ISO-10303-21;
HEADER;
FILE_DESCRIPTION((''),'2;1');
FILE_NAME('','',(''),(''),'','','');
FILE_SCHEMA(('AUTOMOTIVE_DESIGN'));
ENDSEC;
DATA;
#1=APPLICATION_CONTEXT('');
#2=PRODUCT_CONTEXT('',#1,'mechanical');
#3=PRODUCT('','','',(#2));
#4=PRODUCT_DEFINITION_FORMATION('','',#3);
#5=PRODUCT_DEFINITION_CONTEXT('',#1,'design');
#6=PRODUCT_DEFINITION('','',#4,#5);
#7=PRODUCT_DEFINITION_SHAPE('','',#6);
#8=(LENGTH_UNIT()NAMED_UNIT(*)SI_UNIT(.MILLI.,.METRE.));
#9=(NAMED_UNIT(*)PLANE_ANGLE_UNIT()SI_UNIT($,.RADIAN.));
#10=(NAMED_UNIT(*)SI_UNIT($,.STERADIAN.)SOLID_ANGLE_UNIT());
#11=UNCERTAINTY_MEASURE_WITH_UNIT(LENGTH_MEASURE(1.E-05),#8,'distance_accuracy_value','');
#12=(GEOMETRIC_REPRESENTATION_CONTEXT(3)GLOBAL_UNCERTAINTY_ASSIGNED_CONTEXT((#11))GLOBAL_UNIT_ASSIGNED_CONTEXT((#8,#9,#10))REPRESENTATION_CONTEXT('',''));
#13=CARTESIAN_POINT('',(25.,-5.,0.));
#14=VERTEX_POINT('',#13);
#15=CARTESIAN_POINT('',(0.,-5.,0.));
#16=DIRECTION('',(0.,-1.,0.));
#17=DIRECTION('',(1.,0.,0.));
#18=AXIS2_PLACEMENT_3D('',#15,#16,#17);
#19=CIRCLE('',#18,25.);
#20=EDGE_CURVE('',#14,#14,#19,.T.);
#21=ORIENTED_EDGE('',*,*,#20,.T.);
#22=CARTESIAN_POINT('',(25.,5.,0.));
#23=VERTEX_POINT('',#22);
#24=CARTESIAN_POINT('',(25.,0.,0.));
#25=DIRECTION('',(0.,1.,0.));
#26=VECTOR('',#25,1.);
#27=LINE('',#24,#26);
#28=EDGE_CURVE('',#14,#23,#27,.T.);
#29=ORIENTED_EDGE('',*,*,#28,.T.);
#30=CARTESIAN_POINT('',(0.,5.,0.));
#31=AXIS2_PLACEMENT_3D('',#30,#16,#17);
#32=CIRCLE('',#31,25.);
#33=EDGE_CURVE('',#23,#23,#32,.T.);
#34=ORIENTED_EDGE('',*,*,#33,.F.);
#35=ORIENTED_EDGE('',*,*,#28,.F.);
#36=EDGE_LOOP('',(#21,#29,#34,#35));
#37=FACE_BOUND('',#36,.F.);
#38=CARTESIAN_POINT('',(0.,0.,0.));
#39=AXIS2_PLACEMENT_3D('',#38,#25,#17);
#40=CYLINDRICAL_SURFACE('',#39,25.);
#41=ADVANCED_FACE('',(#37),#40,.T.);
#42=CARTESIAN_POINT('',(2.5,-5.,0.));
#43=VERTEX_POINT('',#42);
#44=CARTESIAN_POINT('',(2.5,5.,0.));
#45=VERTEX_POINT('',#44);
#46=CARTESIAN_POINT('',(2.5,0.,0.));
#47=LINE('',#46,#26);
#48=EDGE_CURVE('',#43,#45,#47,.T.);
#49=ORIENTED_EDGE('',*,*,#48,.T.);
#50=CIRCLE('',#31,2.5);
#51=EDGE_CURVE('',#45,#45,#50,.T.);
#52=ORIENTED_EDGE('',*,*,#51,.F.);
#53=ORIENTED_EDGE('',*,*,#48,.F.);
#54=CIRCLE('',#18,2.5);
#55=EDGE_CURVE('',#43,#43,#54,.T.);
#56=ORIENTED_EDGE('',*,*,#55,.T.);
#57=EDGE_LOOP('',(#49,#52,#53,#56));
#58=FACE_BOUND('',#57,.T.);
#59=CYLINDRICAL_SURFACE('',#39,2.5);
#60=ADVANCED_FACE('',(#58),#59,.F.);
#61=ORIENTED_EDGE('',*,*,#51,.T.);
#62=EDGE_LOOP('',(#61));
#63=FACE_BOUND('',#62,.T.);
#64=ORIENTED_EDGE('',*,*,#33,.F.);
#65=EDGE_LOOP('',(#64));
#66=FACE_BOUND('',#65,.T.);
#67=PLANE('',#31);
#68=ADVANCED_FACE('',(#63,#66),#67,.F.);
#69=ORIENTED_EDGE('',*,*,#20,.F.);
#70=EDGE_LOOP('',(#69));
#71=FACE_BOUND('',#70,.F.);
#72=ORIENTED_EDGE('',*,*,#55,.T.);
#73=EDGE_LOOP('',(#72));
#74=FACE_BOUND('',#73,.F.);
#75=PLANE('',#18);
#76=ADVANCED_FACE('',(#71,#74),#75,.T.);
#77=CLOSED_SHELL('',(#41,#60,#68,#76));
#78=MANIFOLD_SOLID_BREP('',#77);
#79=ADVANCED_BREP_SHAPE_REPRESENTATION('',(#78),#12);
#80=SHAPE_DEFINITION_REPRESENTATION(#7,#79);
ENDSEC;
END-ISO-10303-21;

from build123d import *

# Parameters (mm, degrees)
F2_W = 22.5
F2_H = 10


# Not quite as in the source:
# - a feature of the source that left no trace in its solid (it failed there, or was rolled back) is left out


with BuildPart() as f3:
    # F2 (on Top) → F3 (revolve)
    with BuildSketch(Plane.XY):
        with Locations((13.75, 0)):
            Rectangle(F2_W, F2_H)
    revolve(axis=Axis((0, 0.6839819398, 0), (0, -1, 0)))


solid = f3.part
